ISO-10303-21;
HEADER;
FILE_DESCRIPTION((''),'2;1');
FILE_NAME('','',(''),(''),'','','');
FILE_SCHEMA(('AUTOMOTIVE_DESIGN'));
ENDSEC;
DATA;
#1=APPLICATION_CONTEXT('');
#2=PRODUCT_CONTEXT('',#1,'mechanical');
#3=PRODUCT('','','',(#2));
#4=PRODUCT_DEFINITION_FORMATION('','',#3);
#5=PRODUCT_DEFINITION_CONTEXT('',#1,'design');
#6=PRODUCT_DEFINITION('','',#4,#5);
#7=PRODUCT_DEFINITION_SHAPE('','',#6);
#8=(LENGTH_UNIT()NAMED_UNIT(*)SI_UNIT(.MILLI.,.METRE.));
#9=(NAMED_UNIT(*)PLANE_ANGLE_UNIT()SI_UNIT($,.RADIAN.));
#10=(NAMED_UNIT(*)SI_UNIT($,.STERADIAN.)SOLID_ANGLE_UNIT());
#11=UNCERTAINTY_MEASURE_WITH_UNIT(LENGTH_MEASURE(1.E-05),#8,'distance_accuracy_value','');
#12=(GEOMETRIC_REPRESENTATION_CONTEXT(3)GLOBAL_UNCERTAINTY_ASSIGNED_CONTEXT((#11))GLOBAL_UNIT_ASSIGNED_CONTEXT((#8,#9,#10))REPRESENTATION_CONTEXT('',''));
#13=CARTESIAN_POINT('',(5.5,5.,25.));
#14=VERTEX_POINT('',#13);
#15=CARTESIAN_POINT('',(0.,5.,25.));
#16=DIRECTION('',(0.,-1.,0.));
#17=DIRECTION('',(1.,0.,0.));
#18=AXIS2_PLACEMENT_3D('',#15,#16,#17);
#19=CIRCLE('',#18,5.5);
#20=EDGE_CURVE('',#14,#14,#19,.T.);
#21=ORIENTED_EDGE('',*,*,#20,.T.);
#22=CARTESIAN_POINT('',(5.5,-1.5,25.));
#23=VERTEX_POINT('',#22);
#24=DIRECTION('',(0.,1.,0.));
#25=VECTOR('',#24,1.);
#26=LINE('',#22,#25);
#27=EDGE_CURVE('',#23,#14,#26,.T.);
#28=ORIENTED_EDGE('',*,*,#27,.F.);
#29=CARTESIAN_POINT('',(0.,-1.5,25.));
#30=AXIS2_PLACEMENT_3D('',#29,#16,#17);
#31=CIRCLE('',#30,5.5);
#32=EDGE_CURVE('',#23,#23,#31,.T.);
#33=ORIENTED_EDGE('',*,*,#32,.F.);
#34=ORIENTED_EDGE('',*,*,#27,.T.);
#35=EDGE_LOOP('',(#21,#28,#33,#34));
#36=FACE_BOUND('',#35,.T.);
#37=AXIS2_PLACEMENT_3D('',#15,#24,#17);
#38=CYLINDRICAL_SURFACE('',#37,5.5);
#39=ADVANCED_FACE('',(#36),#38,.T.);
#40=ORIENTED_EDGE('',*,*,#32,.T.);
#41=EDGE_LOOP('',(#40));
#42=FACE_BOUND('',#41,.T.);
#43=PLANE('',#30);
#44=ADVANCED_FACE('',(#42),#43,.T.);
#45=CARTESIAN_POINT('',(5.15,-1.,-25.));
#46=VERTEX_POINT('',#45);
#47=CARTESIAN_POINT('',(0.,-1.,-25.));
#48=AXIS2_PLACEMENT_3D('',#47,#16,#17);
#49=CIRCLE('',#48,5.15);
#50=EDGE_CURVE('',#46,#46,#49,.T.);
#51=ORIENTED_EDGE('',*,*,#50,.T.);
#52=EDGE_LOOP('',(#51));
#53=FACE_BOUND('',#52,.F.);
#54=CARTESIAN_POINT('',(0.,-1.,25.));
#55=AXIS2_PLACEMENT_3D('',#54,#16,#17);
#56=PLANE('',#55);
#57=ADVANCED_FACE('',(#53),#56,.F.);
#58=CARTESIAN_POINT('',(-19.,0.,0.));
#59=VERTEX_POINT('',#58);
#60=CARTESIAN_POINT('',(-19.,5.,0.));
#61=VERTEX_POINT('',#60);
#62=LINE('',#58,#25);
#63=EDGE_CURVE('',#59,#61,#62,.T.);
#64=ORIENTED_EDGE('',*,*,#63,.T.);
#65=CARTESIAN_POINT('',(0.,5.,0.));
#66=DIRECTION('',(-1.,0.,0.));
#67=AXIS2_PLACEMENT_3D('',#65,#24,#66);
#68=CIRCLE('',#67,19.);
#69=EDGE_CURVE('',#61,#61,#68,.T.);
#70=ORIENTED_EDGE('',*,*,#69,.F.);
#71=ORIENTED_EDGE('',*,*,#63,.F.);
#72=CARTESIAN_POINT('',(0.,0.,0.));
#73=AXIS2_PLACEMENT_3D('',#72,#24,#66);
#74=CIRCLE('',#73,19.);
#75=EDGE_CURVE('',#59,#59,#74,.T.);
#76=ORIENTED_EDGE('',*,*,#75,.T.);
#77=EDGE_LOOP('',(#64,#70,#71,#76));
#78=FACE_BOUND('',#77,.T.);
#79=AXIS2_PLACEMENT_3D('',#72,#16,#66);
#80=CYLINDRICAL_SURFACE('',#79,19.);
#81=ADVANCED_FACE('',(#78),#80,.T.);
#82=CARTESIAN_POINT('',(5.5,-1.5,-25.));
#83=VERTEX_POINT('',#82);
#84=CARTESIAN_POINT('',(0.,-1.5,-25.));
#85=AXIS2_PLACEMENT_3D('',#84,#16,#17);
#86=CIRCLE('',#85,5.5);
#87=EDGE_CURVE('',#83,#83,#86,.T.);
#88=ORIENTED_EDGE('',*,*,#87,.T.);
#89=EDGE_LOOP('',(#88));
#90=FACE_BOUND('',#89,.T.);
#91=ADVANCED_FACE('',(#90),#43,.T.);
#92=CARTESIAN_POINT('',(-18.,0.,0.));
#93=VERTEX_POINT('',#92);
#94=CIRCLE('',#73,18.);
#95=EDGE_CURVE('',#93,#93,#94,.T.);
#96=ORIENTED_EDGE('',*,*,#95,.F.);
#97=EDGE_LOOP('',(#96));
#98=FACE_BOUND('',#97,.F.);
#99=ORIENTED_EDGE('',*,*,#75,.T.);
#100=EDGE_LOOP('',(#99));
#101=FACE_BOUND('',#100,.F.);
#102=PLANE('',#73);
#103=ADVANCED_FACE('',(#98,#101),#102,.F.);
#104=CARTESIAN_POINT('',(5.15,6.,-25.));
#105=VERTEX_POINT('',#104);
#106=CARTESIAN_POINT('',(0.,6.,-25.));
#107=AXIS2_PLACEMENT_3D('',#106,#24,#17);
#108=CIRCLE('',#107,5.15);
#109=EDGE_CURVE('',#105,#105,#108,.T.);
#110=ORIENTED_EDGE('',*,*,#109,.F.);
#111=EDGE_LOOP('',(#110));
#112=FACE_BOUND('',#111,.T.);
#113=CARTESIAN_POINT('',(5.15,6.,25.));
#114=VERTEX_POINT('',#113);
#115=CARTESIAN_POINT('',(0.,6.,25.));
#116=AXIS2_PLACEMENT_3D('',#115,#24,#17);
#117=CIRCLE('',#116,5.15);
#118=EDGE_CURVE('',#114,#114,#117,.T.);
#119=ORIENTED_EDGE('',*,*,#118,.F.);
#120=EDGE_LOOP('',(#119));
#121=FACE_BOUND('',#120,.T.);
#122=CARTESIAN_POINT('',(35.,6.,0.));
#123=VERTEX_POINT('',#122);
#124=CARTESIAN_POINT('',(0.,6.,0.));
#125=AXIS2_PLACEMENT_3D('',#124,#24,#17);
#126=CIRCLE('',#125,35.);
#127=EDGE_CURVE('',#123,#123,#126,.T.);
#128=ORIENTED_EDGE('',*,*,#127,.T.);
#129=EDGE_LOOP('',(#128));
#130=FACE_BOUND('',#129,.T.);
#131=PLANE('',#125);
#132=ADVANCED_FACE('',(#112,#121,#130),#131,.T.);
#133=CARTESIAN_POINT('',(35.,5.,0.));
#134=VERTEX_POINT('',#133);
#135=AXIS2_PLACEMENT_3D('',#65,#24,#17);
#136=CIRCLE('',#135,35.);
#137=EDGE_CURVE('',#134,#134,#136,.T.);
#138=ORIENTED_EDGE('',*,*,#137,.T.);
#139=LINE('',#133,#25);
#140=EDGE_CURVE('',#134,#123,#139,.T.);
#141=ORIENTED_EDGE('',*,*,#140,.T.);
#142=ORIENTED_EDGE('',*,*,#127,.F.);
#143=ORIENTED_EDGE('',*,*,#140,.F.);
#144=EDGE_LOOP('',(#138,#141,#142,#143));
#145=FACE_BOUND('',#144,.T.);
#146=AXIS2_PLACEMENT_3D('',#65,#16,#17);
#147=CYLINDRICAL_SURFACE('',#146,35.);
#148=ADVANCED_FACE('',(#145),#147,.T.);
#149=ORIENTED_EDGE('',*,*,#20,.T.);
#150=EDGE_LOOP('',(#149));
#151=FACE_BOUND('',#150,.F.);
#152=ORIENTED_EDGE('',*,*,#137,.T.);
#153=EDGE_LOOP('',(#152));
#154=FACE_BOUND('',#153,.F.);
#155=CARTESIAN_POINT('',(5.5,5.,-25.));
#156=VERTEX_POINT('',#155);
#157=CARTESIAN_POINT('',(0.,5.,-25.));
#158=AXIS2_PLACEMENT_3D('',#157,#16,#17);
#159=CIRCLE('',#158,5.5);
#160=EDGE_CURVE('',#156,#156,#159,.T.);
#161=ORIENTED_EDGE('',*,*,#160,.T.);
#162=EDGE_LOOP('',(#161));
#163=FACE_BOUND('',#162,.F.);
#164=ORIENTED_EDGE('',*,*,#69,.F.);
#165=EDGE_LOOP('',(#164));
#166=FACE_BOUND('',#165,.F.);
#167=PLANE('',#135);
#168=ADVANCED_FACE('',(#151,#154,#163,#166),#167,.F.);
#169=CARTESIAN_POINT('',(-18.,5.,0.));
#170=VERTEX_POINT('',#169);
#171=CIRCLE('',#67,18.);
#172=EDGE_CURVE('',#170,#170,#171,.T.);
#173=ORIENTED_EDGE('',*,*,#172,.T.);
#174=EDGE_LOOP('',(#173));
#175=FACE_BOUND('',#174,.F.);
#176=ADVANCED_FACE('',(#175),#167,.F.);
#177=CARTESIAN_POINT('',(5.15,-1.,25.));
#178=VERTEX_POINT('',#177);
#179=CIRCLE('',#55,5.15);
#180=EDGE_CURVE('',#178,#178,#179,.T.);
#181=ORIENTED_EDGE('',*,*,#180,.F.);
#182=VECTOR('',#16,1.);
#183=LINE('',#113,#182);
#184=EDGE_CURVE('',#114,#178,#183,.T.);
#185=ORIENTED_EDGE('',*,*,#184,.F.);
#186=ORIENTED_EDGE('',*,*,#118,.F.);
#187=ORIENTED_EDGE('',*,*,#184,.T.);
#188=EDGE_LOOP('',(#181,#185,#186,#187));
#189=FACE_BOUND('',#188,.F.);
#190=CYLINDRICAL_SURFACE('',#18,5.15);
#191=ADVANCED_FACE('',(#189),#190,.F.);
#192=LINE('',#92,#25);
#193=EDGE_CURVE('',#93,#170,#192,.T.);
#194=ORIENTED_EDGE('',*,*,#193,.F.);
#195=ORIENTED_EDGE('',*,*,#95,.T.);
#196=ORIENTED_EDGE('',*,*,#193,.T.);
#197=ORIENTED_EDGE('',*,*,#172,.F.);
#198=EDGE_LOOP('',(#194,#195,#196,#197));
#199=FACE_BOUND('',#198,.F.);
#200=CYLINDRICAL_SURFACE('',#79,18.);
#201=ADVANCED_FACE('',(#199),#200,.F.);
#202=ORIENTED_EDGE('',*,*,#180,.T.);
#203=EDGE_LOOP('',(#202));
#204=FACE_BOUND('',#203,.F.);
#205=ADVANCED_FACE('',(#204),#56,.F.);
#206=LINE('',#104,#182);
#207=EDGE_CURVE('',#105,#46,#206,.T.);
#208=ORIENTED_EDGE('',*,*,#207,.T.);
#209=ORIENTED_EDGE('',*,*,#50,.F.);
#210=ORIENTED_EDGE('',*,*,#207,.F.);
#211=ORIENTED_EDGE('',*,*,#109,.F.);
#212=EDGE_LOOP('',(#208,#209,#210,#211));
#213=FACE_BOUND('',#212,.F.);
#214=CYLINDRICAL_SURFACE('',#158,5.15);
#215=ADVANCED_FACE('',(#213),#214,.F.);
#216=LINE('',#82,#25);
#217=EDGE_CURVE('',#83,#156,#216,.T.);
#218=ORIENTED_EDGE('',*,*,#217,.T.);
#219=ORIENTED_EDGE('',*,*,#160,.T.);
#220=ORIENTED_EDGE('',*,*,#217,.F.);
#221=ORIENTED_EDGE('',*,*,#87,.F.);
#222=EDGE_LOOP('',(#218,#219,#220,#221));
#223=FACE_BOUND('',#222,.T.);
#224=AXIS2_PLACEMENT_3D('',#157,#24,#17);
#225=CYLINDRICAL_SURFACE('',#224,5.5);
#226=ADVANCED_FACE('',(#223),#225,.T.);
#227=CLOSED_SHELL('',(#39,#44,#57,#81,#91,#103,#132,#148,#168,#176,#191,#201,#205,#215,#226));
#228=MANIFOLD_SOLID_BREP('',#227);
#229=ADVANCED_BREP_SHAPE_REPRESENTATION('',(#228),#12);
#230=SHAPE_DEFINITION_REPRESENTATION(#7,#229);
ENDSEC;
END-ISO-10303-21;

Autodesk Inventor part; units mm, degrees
ref_plane "YZ Plane" through (0, 0, 0) normal (1, 0, 0) x (0, 1, 0)
ref_plane "XZ Plane" through (0, 0, 0) normal (0, 1, 0) x (-1, 0, 0)
ref_plane "XY Plane" through (0, 0, 0) normal (0, 0, 1) x (1, 0, 0)
sketch "Sketch1" plane through (0, 0, 0) normal (0, 1, 0) x (-1, 0, 0)
  circle A0 centre (0, 0) radius 18
  circle A1 centre (0, 0) radius 19
  dimension "d0" = 36
  dimension "d1" = 38
extrude "Extrusion1" add sketch "Sketch1" along normal blind 5
sketch "Sketch2" plane through (0, 5, 0) normal (0, 1, 0) x (1, 0, 0)
  circle A0 centre (0, 0) radius 35
  circle A1 centre (0, 0) radius 19 projected
  circle A2 centre (0, -25) radius 5.15
  circle A3 centre (0, 25) radius 5.15
  dimension "d4" = 16
  dimension "d5" = 10.3
  dimension "d6" = 10.3
  dimension "d7" = 25
  dimension "d8" = 25
extrude "Extrusion2" add sketch "Sketch2" along normal blind 1 contours A0 | A1
sketch "Sketch3" plane through (0, 5, 0) normal (0, -1, 0) x (1, 0, 0)
  circle A0 centre (0, 25) radius 5.15
  circle A1 centre (0, -25) radius 5.15
  circle A2 centre (0, -25) radius 5.15 projected
  circle A3 centre (0, 25) radius 5.15 projected
  circle A4 centre (0, 25) radius 5.5
  circle A5 centre (0, -25) radius 5.5
  point P0 (0, 0)
  point P1 (-4.4822, -18.4638)
  point P2 (4.4822, -18.4638)
  point P3 (4.4822, 18.4638)
  point P4 (-4.4822, 18.4638)
  dimension "d11" = 10.3
  dimension "d12" = 10.3
  dimension "d13" = 0
  dimension "d14" = 0
  dimension "d15" = 11
  dimension "d16" = 11
extrude "Extrusion3" add sketch "Sketch3" along normal blind 6
sketch "Sketch4" plane through (0, -1, 25) normal (0, -1, 0) x (1, 0, 0)
  circle A0 centre (0, 0) radius 5.5
  circle A1 centre (0, -50) radius 5.5
  circle A2 centre (0, -50) radius 5.5 projected
  point P0 (0, -25)
  dimension "d19" = 11
  dimension "d20" = 0
extrude "Extrusion4" add sketch "Sketch4" along normal blind 0.5
properties part number "magnet_holder"
